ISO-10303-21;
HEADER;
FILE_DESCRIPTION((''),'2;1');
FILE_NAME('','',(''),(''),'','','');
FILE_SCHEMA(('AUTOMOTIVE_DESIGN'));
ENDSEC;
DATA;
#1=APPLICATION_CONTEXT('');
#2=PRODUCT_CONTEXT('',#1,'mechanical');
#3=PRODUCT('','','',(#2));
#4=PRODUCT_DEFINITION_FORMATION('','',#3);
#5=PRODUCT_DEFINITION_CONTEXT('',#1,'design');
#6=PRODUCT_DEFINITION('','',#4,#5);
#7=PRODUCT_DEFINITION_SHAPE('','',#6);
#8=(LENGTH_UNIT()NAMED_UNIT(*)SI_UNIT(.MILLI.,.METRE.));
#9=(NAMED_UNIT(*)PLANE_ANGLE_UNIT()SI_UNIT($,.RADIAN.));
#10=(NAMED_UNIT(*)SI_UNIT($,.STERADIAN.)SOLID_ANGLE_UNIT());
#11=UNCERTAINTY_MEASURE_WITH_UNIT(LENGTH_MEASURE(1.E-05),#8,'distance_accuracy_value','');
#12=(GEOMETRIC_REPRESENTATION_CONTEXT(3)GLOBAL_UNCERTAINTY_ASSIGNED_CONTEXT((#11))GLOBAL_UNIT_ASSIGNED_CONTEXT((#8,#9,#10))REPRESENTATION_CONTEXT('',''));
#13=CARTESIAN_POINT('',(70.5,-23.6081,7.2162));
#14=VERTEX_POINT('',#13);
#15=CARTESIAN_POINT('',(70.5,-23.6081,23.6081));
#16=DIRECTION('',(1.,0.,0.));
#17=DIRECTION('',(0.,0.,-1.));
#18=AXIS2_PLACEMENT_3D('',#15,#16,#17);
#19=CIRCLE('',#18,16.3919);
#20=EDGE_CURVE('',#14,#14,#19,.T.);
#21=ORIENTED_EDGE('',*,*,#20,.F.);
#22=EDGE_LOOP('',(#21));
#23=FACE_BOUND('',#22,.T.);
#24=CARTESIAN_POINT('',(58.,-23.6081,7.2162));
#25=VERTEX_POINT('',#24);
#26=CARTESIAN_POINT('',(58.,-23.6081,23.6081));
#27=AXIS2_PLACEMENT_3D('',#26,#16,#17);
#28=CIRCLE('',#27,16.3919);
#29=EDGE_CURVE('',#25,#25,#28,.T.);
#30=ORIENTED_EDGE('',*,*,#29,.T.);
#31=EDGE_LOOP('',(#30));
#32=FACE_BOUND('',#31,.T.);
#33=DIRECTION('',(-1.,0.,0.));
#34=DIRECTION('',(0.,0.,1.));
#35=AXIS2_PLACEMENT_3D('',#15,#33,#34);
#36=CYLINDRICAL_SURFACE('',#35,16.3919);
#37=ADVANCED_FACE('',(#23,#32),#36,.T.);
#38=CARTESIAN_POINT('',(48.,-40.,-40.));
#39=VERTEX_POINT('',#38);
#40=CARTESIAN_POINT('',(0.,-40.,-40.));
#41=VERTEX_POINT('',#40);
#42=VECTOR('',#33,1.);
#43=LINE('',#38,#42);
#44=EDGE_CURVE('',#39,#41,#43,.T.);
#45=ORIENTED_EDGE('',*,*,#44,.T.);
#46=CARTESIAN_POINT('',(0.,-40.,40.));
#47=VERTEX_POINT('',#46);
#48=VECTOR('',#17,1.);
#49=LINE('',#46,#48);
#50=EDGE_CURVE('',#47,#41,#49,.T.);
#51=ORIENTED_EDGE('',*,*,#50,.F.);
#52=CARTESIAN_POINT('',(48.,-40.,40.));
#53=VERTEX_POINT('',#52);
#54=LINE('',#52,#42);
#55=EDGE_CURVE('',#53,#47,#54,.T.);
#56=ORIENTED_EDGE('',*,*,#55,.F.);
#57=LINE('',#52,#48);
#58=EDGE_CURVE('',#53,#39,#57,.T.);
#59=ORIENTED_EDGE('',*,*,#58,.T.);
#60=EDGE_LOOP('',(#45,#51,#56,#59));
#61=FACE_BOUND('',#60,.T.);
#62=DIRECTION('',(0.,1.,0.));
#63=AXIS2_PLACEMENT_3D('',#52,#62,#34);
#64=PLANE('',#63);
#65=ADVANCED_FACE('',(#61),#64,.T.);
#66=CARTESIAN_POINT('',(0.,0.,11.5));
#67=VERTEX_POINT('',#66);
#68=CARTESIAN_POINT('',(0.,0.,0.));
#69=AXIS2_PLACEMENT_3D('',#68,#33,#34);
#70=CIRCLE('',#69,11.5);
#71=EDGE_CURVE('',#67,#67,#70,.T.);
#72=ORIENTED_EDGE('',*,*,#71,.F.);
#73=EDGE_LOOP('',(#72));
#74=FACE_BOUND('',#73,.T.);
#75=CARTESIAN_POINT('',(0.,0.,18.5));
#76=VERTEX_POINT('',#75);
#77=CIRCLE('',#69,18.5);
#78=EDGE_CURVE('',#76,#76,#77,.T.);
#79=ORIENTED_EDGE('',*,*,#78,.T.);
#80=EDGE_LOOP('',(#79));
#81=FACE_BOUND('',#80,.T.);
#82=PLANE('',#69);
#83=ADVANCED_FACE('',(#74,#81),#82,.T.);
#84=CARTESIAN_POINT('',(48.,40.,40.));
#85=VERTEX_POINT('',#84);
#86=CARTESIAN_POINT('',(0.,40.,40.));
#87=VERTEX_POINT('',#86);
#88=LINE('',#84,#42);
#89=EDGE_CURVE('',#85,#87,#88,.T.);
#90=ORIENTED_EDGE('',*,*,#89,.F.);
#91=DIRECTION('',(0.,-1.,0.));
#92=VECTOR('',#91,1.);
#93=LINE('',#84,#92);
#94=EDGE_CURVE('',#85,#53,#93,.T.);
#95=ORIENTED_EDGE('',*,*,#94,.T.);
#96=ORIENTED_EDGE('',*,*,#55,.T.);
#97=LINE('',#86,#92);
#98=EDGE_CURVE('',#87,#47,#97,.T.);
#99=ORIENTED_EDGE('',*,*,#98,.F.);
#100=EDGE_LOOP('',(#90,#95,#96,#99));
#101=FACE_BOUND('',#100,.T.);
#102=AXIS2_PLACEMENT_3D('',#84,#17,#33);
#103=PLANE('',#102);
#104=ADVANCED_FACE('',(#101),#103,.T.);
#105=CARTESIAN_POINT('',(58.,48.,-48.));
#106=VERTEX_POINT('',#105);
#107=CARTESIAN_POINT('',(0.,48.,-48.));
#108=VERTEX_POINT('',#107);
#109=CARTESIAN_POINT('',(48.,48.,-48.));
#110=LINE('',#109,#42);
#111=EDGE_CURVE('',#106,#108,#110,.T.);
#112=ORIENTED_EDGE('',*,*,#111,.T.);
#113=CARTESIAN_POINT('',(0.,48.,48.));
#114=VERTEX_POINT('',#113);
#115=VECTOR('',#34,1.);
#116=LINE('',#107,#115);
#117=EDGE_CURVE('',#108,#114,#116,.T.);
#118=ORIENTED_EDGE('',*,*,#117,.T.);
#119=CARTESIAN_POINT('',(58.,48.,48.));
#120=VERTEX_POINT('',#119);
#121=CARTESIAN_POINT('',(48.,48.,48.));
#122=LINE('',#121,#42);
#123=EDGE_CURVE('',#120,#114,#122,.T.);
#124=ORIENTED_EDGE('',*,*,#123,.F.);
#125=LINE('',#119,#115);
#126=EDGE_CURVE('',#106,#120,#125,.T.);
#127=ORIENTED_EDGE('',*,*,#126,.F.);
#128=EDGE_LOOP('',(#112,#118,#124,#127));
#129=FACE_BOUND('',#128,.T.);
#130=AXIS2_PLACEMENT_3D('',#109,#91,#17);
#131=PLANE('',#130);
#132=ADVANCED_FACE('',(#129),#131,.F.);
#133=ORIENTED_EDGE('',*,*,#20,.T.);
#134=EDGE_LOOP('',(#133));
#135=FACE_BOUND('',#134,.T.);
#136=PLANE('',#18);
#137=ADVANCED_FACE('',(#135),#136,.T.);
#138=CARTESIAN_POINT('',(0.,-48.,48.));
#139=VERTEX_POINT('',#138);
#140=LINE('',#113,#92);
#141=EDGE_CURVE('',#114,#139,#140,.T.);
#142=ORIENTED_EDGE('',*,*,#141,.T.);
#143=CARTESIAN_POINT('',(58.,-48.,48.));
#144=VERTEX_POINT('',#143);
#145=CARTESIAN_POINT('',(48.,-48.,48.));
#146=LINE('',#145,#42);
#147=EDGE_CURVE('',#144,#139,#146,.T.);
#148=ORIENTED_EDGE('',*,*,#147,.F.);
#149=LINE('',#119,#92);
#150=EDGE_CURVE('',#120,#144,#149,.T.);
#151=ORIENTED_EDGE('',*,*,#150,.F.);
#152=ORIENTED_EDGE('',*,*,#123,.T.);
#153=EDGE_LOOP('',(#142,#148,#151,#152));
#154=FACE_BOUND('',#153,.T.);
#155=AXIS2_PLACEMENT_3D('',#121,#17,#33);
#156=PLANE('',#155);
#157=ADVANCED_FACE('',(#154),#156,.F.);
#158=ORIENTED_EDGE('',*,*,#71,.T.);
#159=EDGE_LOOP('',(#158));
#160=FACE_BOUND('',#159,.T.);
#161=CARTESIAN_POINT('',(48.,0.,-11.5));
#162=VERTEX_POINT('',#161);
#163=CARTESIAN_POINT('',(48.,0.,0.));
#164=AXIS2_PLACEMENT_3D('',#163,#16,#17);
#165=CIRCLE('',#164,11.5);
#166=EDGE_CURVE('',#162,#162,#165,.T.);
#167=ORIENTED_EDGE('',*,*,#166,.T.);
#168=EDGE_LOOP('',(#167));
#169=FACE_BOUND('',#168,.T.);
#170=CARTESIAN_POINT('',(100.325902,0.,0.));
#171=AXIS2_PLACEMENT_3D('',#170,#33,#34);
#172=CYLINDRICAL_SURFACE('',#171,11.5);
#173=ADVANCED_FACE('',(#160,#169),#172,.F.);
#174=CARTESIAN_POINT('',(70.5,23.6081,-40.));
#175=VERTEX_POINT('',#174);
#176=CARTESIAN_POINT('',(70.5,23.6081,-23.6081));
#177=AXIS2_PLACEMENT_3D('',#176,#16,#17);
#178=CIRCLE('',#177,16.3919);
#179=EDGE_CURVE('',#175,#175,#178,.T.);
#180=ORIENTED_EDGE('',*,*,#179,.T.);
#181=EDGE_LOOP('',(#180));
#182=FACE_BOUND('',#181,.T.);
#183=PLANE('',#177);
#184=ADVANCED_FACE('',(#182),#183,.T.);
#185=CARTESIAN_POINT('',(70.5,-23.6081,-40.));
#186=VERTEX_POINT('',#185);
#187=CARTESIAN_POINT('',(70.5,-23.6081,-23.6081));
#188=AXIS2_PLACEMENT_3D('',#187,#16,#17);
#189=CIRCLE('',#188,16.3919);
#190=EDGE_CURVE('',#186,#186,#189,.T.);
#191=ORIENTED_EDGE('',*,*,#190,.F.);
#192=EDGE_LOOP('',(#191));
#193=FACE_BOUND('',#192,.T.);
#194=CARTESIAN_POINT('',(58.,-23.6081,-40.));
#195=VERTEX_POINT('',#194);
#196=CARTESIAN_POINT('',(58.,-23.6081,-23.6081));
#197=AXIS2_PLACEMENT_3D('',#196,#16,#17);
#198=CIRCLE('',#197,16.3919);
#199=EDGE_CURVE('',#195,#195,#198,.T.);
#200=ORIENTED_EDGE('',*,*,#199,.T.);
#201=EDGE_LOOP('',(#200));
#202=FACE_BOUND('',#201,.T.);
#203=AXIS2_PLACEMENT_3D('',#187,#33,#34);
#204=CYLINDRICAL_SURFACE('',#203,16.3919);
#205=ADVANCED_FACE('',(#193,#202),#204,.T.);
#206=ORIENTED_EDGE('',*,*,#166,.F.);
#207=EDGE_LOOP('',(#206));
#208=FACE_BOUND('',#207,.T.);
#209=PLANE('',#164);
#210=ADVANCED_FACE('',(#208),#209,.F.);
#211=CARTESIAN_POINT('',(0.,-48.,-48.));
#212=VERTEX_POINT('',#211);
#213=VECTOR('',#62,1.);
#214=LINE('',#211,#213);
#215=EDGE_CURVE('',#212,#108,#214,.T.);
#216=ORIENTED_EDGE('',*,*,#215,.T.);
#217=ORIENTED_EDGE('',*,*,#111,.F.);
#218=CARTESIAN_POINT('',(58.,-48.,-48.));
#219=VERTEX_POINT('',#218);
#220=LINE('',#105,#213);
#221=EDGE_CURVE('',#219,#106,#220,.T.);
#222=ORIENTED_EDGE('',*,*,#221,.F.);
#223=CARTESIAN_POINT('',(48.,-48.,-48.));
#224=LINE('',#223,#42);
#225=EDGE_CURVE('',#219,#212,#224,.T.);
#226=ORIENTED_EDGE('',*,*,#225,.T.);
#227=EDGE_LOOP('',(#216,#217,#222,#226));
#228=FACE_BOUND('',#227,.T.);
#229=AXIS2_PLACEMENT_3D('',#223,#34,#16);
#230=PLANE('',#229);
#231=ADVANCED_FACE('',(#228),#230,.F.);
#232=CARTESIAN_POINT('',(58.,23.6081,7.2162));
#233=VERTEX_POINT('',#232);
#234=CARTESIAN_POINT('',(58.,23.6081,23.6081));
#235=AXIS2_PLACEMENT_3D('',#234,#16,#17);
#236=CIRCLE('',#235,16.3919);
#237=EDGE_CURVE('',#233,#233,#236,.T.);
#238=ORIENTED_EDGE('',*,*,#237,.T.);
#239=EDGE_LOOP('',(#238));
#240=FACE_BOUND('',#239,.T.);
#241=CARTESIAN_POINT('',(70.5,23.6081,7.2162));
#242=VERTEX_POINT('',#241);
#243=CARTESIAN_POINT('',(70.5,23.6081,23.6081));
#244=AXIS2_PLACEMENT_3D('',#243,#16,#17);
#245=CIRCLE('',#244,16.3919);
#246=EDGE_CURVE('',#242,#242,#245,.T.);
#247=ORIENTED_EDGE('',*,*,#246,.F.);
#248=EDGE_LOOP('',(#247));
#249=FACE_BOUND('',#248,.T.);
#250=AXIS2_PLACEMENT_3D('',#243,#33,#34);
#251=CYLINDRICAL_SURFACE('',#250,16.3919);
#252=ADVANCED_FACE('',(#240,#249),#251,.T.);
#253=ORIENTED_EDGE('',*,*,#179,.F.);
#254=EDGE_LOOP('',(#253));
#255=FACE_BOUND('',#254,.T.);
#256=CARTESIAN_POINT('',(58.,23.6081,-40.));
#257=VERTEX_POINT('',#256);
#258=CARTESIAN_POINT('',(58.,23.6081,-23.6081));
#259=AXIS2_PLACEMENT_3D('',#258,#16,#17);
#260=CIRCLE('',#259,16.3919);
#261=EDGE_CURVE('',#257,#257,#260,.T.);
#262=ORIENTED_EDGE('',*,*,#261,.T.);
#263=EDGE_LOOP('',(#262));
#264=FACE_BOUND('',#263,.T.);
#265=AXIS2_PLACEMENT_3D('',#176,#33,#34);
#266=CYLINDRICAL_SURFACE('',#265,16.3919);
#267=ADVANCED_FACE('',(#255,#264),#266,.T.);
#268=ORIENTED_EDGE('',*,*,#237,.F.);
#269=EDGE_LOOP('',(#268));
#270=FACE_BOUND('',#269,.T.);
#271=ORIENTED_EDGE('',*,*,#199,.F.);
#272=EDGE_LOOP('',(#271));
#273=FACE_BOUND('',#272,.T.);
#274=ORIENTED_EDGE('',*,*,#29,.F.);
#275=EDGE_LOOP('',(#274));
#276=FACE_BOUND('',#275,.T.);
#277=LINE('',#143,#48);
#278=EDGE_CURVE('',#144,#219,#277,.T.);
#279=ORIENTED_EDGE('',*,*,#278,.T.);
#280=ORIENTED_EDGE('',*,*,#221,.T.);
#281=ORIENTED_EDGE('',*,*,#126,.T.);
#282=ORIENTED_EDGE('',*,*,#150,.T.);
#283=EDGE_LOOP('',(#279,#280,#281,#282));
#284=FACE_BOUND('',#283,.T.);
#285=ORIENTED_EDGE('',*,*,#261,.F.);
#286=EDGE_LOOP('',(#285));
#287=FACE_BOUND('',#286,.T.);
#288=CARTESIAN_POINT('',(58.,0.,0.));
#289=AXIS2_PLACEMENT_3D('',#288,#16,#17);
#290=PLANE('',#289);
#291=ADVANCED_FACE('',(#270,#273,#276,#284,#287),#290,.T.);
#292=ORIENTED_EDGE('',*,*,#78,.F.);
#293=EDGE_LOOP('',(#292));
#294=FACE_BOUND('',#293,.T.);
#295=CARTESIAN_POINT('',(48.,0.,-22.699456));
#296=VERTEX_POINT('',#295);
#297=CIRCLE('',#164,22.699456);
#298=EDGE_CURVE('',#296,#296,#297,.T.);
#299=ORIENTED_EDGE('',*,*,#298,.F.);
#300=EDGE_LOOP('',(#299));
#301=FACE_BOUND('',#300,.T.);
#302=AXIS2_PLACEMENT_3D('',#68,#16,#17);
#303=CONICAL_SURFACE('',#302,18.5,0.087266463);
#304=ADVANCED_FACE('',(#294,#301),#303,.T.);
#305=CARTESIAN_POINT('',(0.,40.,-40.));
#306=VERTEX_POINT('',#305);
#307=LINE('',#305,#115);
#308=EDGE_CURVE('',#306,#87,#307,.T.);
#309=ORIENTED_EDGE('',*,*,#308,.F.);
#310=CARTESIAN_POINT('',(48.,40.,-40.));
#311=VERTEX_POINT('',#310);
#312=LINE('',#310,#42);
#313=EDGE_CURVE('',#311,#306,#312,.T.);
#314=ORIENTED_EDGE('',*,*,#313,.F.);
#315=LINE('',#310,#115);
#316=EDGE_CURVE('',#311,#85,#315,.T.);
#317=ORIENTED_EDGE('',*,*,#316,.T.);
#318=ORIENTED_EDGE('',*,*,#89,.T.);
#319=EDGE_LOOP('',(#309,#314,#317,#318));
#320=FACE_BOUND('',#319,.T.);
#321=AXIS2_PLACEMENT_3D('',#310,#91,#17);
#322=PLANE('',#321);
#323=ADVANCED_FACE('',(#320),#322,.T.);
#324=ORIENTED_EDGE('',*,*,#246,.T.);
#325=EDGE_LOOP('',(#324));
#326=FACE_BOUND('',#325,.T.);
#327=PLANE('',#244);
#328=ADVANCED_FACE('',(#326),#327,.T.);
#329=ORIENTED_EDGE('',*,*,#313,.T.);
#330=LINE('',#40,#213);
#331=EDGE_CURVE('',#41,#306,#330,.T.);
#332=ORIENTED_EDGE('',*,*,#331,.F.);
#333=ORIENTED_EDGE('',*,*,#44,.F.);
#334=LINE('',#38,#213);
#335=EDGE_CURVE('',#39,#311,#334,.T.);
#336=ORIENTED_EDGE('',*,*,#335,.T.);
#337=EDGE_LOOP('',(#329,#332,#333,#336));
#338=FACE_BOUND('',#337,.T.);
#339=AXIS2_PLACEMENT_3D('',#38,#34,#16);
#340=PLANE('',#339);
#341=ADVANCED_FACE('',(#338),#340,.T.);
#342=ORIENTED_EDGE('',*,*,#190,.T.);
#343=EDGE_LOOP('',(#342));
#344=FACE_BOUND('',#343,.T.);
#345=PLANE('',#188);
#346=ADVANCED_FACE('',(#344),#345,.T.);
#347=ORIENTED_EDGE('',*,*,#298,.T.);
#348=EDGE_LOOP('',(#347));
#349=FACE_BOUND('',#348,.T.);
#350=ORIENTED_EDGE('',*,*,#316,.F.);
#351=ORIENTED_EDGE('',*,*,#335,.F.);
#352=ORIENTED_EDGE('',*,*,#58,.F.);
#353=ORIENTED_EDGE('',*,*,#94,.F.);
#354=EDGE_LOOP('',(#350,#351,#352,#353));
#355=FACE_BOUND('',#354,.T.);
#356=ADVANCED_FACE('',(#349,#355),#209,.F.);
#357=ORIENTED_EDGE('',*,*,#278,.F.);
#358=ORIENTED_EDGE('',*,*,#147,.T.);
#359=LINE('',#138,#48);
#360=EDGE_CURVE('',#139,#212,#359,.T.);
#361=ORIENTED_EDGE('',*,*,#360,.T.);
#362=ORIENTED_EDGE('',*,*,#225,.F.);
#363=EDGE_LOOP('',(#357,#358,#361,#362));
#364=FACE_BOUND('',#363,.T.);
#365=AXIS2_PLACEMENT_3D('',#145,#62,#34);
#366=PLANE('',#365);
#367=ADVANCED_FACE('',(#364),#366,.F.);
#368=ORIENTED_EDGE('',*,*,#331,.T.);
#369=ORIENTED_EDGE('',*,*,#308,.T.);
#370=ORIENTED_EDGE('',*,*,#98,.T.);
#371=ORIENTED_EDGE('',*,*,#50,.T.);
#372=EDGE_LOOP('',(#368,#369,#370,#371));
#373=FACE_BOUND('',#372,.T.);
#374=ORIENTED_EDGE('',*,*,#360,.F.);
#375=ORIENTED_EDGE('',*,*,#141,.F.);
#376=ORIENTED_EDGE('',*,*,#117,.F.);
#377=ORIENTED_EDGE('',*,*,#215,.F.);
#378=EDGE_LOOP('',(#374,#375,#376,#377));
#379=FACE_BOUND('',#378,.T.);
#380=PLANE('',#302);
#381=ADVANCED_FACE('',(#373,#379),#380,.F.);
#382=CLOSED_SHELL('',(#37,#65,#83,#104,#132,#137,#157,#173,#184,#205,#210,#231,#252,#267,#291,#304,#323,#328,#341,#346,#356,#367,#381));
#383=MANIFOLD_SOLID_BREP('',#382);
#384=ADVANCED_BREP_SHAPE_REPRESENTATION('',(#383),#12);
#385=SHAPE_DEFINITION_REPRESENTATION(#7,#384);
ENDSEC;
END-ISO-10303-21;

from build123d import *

# Parameters (mm, degrees)
ESQUISSE5_W        = 96
ESQUISSE5_H        = 96
ESQUISSE5_W_2      = 80
ESQUISSE5_H_2      = 80
BOSS_EXTRU_1_DEPTH = 48
ESQUISSE6_W        = 96
ESQUISSE6_H        = 96
BOSS_EXTRU_3_DEPTH = 10
ESQUISSE7_R        = 16.391900089
BOSS_EXTRU_4_DEPTH = 12.5
ESQUISSE8_R        = 18.5
ESQUISSE8_R_2      = 11.5
BOSS_EXTRU_5_DEPTH = 48
CHANFREIN2_SIZE2   = 48
CHANFREIN2_SIZE    = 4.199455849


with BuildPart() as part:
    # Esquisse5 → Boss.-Extru.1 (new body)
    with BuildSketch(Plane(origin=(0, 0, 0), x_dir=(0, 0, -1), z_dir=(1, 0, 0))):
        Rectangle(ESQUISSE5_W, ESQUISSE5_H)
        Rectangle(ESQUISSE5_W_2, ESQUISSE5_H_2, mode=Mode.SUBTRACT)
    extrude(amount=BOSS_EXTRU_1_DEPTH)

    # Esquisse6 → Boss.-Extru.3 (add)
    with BuildSketch(Plane(origin=(48, 0, 0), x_dir=(0, 0, -1), z_dir=(1, 0, 0))):
        Rectangle(ESQUISSE6_W, ESQUISSE6_H)
    extrude(amount=BOSS_EXTRU_3_DEPTH)

    # Esquisse7 → Boss.-Extru.4 (add)
    with BuildSketch(Plane(origin=(58, 0, 0), x_dir=(0, 0, -1), z_dir=(1, 0, 0))):
        with Locations((23.608099911, 23.608099911)):
            Circle(ESQUISSE7_R)
        with Locations((23.608099911, -23.608099911)):
            Circle(ESQUISSE7_R)
        with Locations((-23.608099911, -23.608099911)):
            Circle(ESQUISSE7_R)
        with Locations((-23.608099911, 23.608099911)):
            Circle(ESQUISSE7_R)
    extrude(amount=BOSS_EXTRU_4_DEPTH)

    # Esquisse8 → Boss.-Extru.5 (add)
    with BuildSketch(Plane.ZY):
        Circle(ESQUISSE8_R)
        Circle(ESQUISSE8_R_2, mode=Mode.SUBTRACT)
    extrude(amount=-BOSS_EXTRU_5_DEPTH)

    # Chanfrein2
    chanfrein2_edges = [part.edges().sort_by_distance(p)[0] for p in [
        (48, 0, -18.5),
    ]]
    chanfrein2_side = [part.faces().sort_by_distance(p)[0] for p in [
        (48, 0, -18.583989117),
    ]]
    chamfer(chanfrein2_edges, length=CHANFREIN2_SIZE - 0.0001, length2=CHANFREIN2_SIZE2 - 0.0001, reference=chanfrein2_side[0])  # a hair under: the kernel refuses the full size


solid = part.part
